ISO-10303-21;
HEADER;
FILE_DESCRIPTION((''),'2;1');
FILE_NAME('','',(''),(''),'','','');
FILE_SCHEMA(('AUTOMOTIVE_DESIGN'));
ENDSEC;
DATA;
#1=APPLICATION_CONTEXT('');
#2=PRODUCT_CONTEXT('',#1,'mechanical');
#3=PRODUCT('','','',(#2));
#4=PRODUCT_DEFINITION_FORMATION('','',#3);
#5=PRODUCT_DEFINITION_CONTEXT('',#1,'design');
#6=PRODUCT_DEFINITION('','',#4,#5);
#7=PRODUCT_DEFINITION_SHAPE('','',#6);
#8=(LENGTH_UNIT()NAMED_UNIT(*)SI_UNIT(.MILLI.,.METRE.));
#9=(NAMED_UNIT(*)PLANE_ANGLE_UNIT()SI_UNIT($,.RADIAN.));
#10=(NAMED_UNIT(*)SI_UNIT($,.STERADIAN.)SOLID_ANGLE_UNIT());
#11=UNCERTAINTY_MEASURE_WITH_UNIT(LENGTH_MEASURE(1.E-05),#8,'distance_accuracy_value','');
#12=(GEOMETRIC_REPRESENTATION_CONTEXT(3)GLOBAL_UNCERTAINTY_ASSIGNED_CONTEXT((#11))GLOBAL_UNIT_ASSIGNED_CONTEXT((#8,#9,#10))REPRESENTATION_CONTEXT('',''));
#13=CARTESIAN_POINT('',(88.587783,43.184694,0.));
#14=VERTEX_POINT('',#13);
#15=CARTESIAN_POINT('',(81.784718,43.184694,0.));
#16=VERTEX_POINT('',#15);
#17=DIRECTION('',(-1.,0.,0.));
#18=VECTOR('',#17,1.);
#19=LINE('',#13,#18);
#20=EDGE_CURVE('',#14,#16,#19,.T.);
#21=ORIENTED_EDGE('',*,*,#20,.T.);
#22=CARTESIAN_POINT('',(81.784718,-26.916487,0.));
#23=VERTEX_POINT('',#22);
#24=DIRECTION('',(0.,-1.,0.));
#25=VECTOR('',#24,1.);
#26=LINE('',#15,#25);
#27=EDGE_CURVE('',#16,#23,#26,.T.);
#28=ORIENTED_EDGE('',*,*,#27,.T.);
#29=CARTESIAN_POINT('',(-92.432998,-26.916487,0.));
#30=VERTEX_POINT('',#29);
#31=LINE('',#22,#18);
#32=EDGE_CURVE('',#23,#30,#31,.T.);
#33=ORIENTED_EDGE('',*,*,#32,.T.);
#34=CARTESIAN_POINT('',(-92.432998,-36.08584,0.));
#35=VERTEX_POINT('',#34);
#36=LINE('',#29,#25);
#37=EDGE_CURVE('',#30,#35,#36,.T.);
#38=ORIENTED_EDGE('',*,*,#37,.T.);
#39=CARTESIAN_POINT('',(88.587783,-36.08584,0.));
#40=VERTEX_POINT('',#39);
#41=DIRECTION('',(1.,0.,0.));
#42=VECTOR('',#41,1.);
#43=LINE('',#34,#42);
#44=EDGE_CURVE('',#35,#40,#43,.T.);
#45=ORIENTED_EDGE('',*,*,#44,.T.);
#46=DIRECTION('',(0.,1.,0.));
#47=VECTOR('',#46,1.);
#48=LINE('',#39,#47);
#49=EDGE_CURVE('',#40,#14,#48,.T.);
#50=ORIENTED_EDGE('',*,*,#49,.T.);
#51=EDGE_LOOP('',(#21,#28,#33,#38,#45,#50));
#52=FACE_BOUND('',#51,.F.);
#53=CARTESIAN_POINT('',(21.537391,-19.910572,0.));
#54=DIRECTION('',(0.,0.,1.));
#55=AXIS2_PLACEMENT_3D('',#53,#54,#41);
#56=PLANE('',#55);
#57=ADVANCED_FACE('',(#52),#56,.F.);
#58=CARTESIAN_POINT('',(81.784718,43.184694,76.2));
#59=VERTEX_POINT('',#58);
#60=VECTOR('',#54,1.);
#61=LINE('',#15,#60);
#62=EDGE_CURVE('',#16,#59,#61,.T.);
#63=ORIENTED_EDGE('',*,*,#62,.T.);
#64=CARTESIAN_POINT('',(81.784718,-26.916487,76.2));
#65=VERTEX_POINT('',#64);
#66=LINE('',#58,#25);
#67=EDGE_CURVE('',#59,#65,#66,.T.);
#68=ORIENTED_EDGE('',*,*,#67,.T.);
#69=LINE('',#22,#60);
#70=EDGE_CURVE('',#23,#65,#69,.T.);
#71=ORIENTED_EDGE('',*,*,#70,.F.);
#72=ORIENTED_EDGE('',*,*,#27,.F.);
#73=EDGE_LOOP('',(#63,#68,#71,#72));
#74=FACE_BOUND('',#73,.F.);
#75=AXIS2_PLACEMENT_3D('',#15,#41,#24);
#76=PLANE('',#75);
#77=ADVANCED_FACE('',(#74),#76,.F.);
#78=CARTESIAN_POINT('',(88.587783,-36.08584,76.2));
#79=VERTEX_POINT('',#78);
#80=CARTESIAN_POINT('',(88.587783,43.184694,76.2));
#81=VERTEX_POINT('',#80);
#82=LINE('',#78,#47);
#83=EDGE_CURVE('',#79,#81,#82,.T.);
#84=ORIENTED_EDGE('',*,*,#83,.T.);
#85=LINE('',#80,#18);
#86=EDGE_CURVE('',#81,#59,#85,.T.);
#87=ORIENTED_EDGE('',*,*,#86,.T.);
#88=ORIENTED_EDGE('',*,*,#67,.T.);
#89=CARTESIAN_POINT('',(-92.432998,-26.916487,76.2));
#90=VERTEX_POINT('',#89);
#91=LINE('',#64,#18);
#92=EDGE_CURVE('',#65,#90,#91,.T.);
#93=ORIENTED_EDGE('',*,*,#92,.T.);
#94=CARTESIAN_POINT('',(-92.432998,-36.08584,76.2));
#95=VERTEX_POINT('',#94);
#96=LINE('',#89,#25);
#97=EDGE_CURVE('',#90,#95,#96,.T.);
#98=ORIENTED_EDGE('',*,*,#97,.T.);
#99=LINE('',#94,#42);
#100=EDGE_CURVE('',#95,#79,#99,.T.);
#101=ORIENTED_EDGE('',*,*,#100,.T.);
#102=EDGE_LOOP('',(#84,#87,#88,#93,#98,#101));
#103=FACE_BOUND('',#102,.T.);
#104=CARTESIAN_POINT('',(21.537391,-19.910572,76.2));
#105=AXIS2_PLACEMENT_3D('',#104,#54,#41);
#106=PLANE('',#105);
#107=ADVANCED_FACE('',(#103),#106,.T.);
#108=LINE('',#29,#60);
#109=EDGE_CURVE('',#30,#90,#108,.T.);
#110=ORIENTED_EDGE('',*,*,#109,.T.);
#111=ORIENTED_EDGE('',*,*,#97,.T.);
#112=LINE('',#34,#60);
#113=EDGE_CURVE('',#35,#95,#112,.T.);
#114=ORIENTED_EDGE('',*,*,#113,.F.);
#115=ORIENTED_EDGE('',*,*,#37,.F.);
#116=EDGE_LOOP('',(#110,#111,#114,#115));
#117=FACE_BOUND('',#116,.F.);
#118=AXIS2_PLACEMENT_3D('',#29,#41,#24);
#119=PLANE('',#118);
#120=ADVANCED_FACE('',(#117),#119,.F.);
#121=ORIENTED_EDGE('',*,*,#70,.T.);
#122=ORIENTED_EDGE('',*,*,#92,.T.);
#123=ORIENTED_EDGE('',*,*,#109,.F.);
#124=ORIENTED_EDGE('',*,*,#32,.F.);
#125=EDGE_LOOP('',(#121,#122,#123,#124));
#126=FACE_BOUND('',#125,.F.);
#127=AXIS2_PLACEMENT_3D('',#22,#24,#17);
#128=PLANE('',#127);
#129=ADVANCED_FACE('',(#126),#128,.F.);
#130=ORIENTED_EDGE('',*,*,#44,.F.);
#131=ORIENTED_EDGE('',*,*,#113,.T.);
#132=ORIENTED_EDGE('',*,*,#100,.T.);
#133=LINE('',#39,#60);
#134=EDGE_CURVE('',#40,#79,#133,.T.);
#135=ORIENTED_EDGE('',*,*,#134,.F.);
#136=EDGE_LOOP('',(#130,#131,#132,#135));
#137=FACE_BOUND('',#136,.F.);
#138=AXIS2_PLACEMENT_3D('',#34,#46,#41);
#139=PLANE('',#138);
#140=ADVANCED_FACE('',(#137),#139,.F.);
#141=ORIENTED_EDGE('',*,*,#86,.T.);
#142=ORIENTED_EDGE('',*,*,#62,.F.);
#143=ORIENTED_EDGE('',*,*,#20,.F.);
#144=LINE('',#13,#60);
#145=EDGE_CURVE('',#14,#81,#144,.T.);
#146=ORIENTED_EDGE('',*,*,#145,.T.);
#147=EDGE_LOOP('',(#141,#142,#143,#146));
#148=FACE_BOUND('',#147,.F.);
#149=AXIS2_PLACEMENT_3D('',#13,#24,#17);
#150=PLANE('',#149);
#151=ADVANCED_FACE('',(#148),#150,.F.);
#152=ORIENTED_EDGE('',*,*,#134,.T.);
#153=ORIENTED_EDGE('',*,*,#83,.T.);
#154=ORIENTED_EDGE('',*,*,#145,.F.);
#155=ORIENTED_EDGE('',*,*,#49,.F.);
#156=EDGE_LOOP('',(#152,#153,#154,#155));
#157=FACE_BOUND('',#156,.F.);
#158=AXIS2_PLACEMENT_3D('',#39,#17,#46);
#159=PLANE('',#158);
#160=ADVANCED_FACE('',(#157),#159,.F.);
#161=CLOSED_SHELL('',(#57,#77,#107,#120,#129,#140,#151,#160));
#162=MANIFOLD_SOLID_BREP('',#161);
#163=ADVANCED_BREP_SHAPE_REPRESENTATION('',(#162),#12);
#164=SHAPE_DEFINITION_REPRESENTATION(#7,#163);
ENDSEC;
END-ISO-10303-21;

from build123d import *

# Parameters (mm, degrees)
F2_DEPTH = 76.2
F3_DEPTH = 76.2


# Not quite as in the source:
# - the program builds the solid bodies; features that only make, move or delete a surface that nothing else refers to are left out


with BuildPart() as f2:
    # F0 (on Top) → F2 (new body)
    with BuildSketch(Plane.XY):
        Polygon((88.587783277, 43.1846939027), (81.7847177386, 43.1846939027), (81.7847177386, -26.9164871424), (-92.4329981208, -26.9164871424), (-92.4329981208, -36.0858403146), (88.587783277, -36.0858403146), align=None)
    extrude(amount=F2_DEPTH)

    # F0 (on Top) → F3 (join)
    with BuildSketch(Plane.XY):
        Polygon((88.587783277, 43.1846939027), (81.7847177386, 43.1846939027), (81.7847177386, -26.9164871424), (-92.4329981208, -26.9164871424), (-92.4329981208, -36.0858403146), (88.587783277, -36.0858403146), align=None)
    extrude(amount=F3_DEPTH)


solid = f2.part
